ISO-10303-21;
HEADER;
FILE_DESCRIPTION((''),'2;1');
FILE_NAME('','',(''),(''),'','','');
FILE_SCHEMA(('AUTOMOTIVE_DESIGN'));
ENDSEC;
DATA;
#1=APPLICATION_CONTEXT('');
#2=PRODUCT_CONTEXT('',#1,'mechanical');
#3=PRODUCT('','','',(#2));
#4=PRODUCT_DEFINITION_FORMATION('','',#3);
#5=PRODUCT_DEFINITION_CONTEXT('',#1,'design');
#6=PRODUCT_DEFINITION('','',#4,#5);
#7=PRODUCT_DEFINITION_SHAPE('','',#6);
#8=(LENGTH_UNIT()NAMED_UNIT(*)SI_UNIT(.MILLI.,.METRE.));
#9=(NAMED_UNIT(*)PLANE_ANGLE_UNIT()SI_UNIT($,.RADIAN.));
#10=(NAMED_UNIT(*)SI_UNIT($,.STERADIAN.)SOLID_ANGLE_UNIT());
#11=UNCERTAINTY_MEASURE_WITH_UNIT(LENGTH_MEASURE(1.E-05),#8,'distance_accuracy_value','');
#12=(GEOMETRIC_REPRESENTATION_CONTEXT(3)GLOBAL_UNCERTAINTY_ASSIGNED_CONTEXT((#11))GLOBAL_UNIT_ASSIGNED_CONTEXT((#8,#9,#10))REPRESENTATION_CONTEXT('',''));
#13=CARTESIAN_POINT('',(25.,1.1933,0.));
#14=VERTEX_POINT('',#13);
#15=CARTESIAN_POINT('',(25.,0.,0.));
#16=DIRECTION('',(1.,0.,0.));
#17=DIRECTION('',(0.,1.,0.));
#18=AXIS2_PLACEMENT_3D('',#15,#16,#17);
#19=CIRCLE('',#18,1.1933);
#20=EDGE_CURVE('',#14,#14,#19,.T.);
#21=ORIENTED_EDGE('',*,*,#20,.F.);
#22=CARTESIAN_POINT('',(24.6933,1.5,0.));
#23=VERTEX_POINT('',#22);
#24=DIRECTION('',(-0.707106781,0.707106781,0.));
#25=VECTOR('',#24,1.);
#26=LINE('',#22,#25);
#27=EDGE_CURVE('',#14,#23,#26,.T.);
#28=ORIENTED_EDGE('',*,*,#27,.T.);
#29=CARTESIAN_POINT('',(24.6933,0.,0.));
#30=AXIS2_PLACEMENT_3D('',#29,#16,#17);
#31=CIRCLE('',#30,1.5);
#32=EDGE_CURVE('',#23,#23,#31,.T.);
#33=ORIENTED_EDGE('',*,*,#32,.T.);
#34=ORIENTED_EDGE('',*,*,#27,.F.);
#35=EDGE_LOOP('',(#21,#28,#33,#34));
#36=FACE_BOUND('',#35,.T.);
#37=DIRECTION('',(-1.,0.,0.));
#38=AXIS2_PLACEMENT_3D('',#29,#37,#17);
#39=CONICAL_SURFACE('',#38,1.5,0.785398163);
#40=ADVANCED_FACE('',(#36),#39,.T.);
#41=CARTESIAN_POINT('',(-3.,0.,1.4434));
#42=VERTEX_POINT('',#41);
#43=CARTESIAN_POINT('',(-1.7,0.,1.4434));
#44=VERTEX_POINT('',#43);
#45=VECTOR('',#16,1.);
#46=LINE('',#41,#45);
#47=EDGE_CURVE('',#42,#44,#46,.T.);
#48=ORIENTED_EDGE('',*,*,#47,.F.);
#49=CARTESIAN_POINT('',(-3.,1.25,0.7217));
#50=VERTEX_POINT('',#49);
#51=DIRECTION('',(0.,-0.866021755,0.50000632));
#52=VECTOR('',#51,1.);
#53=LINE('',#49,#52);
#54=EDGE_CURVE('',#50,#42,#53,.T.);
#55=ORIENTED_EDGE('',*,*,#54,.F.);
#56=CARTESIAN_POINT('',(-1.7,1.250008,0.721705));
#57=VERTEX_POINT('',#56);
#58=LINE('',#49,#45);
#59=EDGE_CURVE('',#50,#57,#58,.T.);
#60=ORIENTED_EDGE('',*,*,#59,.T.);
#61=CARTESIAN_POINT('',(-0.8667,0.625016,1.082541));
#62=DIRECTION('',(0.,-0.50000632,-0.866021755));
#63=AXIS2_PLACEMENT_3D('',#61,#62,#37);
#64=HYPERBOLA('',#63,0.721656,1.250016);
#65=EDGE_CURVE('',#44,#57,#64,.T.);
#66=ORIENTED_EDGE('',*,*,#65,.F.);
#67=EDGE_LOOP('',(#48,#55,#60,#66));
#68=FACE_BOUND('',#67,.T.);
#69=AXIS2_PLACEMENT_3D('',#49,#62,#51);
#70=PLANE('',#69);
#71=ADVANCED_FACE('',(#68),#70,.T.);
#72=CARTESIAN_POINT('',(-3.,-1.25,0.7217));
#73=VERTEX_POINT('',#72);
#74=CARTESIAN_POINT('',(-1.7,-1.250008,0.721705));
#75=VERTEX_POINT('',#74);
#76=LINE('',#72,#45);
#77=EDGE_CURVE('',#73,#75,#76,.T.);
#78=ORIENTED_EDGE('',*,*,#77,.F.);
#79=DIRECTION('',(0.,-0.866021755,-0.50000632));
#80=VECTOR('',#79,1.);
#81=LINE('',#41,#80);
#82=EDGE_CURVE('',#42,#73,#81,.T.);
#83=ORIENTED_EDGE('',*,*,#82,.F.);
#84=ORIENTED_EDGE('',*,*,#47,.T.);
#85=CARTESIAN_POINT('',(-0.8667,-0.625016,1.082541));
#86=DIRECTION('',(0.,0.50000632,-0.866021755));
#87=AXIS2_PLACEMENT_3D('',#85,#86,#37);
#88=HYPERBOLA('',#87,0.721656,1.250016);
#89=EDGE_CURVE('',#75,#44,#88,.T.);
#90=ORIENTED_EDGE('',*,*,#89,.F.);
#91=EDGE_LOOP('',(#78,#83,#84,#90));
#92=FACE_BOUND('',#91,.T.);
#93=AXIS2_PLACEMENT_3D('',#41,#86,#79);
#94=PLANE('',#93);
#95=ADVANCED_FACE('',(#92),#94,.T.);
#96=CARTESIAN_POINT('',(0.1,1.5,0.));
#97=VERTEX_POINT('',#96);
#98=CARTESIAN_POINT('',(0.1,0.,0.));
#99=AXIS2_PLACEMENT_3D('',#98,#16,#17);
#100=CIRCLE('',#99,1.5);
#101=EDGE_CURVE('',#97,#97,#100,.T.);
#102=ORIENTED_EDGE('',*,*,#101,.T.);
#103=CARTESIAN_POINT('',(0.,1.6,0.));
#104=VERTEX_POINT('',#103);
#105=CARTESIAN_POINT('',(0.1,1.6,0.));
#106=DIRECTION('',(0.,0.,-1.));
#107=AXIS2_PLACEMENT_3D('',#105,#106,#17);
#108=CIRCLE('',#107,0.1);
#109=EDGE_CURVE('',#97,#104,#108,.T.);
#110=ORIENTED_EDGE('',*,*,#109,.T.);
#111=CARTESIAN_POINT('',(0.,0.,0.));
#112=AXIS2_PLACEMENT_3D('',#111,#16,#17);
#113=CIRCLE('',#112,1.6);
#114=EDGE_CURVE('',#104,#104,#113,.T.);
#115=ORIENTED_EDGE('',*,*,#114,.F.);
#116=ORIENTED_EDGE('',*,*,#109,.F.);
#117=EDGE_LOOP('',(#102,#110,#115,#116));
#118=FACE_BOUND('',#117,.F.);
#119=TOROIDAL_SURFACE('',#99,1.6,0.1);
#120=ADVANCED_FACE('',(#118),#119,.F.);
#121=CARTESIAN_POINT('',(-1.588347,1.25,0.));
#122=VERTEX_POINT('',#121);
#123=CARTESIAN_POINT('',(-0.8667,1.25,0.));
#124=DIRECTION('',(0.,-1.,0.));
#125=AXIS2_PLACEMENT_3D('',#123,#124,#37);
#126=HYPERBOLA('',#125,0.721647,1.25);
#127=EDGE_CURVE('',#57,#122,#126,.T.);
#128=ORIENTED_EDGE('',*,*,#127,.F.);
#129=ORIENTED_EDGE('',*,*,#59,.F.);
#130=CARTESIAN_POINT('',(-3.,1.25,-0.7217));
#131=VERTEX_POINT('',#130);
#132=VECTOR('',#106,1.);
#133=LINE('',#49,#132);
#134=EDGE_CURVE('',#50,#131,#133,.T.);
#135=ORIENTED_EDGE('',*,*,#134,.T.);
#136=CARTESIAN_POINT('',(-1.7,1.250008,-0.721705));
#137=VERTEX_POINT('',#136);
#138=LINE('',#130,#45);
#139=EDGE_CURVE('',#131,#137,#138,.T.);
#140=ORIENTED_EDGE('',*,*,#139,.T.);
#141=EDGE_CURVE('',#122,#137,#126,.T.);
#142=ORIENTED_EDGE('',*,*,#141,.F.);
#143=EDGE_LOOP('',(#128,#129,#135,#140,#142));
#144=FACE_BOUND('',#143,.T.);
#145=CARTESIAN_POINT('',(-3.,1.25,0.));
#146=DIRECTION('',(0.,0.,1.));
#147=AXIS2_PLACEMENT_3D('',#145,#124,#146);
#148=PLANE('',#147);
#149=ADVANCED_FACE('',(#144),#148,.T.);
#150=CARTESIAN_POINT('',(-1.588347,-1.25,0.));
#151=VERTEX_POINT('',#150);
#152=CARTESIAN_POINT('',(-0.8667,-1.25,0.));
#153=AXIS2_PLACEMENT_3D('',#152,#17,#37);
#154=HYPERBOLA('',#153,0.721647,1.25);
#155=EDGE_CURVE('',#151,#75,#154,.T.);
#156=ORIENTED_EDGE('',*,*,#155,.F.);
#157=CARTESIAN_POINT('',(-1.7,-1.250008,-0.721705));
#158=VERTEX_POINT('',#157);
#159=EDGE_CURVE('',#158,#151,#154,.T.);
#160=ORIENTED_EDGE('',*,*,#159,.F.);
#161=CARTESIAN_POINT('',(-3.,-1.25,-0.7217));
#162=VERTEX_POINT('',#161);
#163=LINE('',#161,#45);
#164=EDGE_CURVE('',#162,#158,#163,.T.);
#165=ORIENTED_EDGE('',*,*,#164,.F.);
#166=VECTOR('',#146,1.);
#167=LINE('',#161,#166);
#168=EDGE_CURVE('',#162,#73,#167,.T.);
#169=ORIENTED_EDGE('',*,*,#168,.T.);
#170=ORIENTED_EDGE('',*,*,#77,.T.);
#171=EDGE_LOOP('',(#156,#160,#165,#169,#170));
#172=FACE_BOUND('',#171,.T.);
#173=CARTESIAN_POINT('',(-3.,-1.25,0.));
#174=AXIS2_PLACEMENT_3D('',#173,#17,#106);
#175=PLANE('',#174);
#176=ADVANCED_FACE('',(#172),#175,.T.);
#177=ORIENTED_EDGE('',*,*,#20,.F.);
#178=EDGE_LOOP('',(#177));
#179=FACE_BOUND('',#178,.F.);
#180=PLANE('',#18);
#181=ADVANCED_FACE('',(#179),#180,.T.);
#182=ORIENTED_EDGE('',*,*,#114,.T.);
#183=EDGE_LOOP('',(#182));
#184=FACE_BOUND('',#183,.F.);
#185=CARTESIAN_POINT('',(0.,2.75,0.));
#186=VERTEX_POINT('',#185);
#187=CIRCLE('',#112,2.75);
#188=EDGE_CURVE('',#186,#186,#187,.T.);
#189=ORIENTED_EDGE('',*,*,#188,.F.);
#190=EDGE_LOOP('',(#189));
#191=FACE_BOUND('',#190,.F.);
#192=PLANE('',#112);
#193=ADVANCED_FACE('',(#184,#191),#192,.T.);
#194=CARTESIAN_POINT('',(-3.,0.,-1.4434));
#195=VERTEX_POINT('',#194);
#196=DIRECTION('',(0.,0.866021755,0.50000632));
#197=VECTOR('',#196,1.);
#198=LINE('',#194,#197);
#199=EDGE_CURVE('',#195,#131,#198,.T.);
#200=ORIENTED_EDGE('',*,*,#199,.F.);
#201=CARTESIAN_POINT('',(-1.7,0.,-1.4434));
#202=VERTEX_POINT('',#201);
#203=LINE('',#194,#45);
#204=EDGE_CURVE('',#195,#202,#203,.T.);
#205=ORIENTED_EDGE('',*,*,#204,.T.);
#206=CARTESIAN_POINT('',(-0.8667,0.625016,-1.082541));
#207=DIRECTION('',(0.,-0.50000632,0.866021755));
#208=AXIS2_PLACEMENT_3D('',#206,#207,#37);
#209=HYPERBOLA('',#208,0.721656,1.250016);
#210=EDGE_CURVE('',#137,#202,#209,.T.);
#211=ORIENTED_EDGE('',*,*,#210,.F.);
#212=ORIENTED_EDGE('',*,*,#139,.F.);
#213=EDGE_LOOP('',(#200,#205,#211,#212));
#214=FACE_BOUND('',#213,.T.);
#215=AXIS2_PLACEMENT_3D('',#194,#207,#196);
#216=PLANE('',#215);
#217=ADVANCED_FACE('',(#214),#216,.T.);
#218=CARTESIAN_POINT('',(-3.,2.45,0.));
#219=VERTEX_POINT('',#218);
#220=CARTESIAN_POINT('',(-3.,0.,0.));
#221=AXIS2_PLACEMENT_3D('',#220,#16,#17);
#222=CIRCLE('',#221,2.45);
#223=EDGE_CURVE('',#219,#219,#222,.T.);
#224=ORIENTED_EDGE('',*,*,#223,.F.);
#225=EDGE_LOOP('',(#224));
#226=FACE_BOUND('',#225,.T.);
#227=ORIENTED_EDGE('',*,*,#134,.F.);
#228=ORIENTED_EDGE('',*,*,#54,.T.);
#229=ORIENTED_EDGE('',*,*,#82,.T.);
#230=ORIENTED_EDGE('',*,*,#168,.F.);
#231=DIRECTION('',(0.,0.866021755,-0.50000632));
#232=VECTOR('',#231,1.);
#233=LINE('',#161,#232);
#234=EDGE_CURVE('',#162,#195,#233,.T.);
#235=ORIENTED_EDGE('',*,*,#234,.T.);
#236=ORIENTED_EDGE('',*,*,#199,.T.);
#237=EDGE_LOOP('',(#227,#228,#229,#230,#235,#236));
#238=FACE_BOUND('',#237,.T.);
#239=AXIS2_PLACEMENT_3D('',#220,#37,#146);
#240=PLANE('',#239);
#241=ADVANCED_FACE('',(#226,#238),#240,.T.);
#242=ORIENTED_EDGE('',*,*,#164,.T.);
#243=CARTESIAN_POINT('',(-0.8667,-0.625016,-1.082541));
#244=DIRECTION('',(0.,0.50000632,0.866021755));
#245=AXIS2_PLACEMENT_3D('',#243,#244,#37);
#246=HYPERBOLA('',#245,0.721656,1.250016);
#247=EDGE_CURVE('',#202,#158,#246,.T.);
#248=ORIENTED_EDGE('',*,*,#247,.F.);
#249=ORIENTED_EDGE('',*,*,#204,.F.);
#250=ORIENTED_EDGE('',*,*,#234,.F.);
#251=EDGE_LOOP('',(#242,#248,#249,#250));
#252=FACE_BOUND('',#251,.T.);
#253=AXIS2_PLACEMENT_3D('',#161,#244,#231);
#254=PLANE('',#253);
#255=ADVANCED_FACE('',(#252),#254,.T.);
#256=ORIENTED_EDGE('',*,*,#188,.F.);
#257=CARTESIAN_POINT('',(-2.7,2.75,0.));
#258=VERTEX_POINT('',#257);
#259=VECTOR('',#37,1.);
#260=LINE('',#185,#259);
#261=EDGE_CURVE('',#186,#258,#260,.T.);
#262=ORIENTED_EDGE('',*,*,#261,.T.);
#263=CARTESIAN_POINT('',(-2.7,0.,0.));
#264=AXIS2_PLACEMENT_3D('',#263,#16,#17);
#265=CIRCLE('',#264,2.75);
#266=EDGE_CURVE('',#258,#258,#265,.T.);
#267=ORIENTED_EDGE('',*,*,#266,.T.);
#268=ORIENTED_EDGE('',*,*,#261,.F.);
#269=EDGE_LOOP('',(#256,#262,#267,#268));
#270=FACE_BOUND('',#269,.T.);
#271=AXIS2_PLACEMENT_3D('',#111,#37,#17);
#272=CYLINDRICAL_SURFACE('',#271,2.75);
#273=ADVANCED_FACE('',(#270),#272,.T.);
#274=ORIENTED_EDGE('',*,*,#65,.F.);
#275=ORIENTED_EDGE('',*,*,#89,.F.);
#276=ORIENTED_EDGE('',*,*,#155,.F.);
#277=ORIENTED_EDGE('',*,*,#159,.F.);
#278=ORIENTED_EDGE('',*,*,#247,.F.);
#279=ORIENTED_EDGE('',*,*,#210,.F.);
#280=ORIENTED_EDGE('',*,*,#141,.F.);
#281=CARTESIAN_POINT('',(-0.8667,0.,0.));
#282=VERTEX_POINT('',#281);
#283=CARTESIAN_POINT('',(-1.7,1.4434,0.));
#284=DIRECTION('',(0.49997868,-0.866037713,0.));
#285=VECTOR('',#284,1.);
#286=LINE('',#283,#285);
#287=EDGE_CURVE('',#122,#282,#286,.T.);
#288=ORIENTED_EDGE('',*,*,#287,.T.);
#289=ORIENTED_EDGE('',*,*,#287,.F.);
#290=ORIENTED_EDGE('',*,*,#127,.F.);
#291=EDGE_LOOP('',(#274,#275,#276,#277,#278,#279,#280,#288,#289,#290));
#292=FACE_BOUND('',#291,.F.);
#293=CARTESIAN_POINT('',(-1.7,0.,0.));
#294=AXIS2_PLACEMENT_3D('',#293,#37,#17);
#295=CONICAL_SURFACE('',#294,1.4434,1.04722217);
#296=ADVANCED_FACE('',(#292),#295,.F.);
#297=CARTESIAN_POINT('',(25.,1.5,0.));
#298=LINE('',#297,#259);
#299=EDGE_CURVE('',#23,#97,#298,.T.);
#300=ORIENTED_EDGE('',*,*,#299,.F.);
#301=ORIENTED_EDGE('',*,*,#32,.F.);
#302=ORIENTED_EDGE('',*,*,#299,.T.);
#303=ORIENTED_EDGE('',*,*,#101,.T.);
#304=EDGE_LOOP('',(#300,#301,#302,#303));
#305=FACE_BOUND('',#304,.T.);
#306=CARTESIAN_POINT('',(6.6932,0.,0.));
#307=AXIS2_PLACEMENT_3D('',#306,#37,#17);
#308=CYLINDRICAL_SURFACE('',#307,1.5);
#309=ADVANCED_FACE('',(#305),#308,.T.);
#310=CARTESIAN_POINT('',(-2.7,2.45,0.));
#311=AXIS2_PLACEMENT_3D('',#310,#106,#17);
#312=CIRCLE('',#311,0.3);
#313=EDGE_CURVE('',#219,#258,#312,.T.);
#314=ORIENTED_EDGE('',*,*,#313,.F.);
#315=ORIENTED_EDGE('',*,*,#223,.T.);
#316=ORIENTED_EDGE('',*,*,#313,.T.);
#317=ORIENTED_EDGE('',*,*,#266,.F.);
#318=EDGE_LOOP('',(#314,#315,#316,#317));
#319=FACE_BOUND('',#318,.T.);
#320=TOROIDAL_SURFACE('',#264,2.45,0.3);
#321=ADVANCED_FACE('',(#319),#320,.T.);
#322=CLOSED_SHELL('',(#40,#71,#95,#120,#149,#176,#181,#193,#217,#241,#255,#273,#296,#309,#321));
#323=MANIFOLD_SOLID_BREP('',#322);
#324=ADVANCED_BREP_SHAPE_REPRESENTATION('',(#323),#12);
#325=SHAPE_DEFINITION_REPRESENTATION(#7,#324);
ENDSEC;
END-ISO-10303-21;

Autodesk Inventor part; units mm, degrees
ref_plane "YZ Plane" through (0, 0, 0) normal (1, 0, 0) x (0, 1, 0)
ref_plane "XZ Plane" through (0, 0, 0) normal (0, 1, 0) x (-1, 0, 0)
sketch "Sketch1" plane through (0, 0, 0) normal (0, 0, 1) x (1, 0, 0)
  line L0 (-0.8667, 0) -> (25, 0)
  line L1 (25, 0) -> (25, 1.5)
  line L2 (25, 1.5) -> (7, 1.5)
  line L3 (7, 1.5) -> (6.6932, 1.5)
  line L4 (6.6932, 1.5) -> (0, 1.5)
  line L5 (0, 1.5) -> (0, 2.75)
  line L6 (0, 2.75) -> (-3, 2.75)
  line L7 (-3, 2.75) -> (-3, 1.4434)
  line L8 (-3, 1.4434) -> (-1.7, 1.4434)
  line L9 (-1.7, 1.4434) -> (-0.8667, 0)
  line L10 (-8.6, 0) -> (30.6, 0) projected
  line L11 (0, -0.55) -> (0, 3.3) projected
  line L12 (7, 1.5) -> (0, 1.5) construction
  dimension "d1" = 18
  dimension "d2" = 0.3068
  dimension "d3" = 3
  dimension "d4" = 1.3
  dimension "d5" = 60
  dimension "d6" = 3
  dimension "d7" = 3
  dimension "d8" = 2.8868
  dimension "d9" = 5.5
  dimension "d26" = 25
revolve "Body" add sketch "Sketch1" angle 360 about axis through (-0.8667, 0, 0) along (1, 0, 0)
sketch "Sketch2" plane through (-3, 0, 0) normal (-1, 0, 0) x (0, 0, 1)
  circle A0 centre (0, 0) radius 1.4434 projected
  line L0 (0, -3.85) -> (0, 3.85) projected
  line L1 (-3.85, 0) -> (3.85, 0) projected
  line L2 (1.4434, 0) -> (0.7217, -1.25)
  line L3 (0.7217, -1.25) -> (-0.7217, -1.25)
  line L4 (-0.7217, -1.25) -> (-1.4434, 0)
  line L5 (-1.4434, 0) -> (-0.7217, 1.25)
  line L6 (-0.7217, 1.25) -> (0.7217, 1.25)
  line L7 (0.7217, 1.25) -> (1.4434, 0)
extrude "Slot" add sketch "Sketch2" against normal up to next contours L7 A0 | A0 L2 | L6 L0 A0 | A0 L0 L3 | L0 L6 A0 | A0 L3 L0 | L4 A0 | A0 L5
fillet "Fillet1" radius 0.3 1 edges at (-3, -2.75, 0)
thread "Thread" size "M3x0.5" class "6g" standard "ISO Metric profile" length 18
chamfer "Chamfer1" distance 0.3067 distance2 0.3067 1 edges at (25, -1.5, 0) measured on face at (25, 0.2885, 0.9187)
ref_plane "Work Plane1" through (29, 0, 0) normal (0, -1, 0) x (1, 0, 0)
fillet "Fillet2" radius 0.1 1 edges at (0, -1.5, 0)
equation "\"d30\" = R"
equation "\"d17\" = RR"
equation "\"d13\" = GEL"
equation "\"d15\" = -0.5 * SPD + 0.5 * GD"
equation "\"d16\" = GUL"
equation "\"d1\" = GEL"
equation "\"d3\" = KOH"
equation "\"d4\" = INTI"
equation "\"d6\" = GD"
equation "\"d7\" = BDM"
equation "\"d8\" = 1.1547 * SW"
equation "\"d9\" = KOD"
equation "\"d26\" = NLG"
equation "\"GD\" = 3"
equation "\"NLG\" = 25"
equation "\"GEL\" = 18"
equation "\"KOD\" = 5.5"
equation "\"KOH\" = 3"
equation "\"INTI\" = 1.3"
equation "\"GAL\" = 0.61345 * PTC"
equation "\"GUL\" = 0.61345 * PTC"
equation "\"BDM\" = NND"
equation "\"SW\" = 2.5"
equation "\"RR\" = 0.3"
equation "\"SPD\" = NND - 1.2269 * PTC"
equation "\"R\" = 0.1"
equation "\"TOA\" = 30deg"
equation "\"GD1\" = THREADDIA - 1.2269 * PTC"
equation "\"THREADDIA\" = 3"
equation "\"FAWI\" = 45deg"
equation "\"PTC\" = 0.5"
equation "\"NND\" = 3"
equation "\"E0\" = 1.155 * SW"
properties part number "ISO 4762 - M3 x 25" material "Stainless Steel, 440C"
